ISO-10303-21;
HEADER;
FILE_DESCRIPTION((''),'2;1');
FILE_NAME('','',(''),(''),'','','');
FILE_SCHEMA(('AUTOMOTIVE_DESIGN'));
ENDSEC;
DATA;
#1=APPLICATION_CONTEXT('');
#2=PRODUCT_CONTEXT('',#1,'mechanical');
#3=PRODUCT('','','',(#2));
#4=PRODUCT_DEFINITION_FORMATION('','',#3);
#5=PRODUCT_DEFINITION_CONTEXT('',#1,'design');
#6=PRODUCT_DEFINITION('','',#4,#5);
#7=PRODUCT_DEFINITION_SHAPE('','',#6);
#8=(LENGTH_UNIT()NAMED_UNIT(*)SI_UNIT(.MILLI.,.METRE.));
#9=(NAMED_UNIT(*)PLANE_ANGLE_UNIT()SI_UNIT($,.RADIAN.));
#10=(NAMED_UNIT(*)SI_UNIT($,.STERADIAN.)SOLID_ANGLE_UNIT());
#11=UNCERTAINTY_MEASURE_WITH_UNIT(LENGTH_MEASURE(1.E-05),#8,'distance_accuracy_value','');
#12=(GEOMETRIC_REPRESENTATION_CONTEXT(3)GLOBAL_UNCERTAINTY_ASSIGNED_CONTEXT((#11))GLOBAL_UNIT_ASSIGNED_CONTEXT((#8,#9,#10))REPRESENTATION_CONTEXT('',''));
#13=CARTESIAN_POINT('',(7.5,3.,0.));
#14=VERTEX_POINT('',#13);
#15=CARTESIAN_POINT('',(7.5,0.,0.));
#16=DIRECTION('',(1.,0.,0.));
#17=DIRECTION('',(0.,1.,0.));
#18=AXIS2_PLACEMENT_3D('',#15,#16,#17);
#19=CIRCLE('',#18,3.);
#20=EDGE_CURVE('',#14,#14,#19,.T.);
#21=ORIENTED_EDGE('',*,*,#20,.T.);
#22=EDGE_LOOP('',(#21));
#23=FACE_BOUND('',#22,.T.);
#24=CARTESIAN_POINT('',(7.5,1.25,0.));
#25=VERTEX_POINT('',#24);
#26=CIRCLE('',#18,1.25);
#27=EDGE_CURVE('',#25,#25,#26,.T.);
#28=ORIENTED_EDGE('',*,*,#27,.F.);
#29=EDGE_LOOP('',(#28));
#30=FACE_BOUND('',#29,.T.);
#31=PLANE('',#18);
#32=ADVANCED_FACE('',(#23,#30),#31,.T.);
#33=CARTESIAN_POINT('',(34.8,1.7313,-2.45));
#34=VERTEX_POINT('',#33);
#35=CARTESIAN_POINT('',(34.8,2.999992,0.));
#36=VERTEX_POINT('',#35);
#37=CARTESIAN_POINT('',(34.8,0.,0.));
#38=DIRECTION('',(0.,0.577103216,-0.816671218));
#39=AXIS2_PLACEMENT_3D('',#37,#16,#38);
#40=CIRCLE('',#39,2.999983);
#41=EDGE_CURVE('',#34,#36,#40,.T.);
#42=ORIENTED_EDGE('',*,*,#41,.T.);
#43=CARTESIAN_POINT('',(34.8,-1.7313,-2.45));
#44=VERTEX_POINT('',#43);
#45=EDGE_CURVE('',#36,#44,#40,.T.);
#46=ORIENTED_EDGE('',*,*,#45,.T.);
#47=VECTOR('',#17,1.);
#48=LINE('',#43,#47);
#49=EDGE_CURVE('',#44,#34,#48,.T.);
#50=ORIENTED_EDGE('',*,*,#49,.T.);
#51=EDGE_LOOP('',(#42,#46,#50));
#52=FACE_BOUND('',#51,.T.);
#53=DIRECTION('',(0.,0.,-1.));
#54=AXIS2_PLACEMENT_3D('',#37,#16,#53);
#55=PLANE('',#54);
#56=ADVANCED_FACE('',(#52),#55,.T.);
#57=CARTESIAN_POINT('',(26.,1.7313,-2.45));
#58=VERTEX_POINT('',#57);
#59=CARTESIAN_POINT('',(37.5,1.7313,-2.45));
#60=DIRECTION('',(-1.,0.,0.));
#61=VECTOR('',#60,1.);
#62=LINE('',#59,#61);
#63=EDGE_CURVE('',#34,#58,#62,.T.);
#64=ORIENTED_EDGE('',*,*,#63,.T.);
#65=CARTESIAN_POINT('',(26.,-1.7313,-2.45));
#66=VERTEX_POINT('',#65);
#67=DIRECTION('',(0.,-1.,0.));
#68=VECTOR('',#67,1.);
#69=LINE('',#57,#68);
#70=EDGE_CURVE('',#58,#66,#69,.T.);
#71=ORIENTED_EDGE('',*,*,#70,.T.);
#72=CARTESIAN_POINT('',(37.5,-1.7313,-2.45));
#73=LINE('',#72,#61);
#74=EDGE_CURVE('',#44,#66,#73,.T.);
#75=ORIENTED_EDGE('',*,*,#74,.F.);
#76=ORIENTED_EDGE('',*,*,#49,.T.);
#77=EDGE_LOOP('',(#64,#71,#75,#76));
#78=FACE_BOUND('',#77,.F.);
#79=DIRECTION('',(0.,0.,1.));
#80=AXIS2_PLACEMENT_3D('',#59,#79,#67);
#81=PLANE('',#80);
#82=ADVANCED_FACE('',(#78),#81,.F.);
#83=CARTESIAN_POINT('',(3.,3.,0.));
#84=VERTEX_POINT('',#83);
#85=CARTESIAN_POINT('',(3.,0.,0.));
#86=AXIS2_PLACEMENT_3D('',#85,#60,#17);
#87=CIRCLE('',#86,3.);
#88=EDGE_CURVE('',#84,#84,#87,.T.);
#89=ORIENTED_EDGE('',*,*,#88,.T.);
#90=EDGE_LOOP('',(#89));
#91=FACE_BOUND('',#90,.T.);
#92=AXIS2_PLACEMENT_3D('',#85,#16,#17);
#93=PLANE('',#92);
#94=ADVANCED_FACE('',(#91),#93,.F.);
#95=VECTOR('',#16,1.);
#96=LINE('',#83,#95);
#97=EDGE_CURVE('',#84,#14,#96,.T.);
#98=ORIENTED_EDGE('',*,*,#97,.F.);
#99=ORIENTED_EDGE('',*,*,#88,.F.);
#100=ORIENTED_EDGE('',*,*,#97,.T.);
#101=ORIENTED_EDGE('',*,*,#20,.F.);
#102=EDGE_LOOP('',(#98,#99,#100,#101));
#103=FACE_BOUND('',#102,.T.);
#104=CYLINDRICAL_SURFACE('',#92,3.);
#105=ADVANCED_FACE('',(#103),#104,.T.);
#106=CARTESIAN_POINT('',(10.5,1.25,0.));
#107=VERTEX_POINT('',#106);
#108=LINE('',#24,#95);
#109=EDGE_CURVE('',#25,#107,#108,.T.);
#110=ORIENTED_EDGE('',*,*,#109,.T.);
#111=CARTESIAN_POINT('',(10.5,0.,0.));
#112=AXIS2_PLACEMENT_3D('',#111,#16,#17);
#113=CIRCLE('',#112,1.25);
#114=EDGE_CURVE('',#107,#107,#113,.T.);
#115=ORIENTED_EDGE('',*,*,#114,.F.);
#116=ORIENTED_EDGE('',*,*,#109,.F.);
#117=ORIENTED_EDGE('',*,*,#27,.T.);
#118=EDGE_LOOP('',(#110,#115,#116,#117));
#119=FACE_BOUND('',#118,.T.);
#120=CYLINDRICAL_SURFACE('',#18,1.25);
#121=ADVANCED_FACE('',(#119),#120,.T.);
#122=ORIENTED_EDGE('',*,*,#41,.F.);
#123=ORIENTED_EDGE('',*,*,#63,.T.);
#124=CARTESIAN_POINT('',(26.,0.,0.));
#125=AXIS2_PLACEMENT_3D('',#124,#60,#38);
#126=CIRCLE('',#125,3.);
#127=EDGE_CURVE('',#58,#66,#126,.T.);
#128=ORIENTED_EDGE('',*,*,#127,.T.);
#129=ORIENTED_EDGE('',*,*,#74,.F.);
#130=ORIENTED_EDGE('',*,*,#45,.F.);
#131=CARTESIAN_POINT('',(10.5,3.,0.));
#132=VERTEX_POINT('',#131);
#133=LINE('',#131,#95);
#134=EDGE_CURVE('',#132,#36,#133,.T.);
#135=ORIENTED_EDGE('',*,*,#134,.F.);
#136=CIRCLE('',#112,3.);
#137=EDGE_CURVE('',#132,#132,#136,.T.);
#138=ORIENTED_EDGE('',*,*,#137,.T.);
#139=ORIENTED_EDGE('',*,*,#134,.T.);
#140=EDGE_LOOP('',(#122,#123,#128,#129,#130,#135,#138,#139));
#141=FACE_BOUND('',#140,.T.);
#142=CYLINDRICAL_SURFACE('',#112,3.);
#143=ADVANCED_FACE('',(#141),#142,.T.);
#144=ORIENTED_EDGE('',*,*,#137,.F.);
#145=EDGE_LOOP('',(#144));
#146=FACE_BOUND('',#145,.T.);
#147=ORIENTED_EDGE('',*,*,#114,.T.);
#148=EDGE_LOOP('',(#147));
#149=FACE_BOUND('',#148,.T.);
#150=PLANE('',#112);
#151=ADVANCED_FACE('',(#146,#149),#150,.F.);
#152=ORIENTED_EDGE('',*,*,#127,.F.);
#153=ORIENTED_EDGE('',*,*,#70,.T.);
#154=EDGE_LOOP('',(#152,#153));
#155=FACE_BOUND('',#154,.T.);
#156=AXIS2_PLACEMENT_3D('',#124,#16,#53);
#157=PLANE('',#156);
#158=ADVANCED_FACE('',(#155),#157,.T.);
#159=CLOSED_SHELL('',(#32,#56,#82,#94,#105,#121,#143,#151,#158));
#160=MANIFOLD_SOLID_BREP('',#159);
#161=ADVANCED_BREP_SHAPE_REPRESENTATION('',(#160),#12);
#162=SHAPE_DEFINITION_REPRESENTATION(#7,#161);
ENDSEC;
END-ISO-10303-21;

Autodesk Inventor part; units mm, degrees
ref_plane "Start Plane" through (0, 0, 0) normal (1, 0, 0) x (0, 1, 0)
ref_plane "XZ Plane" through (0, 0, 0) normal (0, 1, 0) x (-1, 0, 0)
sketch "Main Sketch" plane through (0, 0, 0) normal (0, 0, 1) x (1, 0, 0)
  line L0 (0, 0) -> (37.5, 0)
  line L1 (0, 0) -> (0, 1.205)
  line L2 (0, 1.205) -> (3, 1.205)
  line L3 (3, 1.205) -> (3, 3)
  line L4 (7.5, 3) -> (7.5, 1.25)
  line L5 (3, 3) -> (7.5, 3)
  line L6 (7.5, 1.25) -> (10.5, 1.25)
  line L7 (10.5, 1.25) -> (10.5, 3)
  line L8 (37.5, 3) -> (37.5, 0)
  line L9 (10.5, 3) -> (37.5, 3)
  dimension "d3" = 2.41
  dimension "d4" = 6
  dimension "d5" = 2.5
  dimension "d6" = 6
revolve "Revolution1" add sketch "Main Sketch" angle 360 about axis through (0, 0, 0) along (1, 0, 0)
sketch "Sketch3" plane through (37.5, 0, 0) normal (1, 0, 0) x (0, 0, -1)
  circle A0 centre (0, 0) radius 3 projected
  circle A1 centre (0, 0) radius 3 projected
  line L0 (2.45, 1.7313) -> (2.45, -1.7313)
  dimension "d8" = 5.45
extrude "Extrusion1" cut sketch "Sketch3" against normal blind 11.5 contours A0 L0 picked at (2.5504, -0.3987)
ref_plane "Work Plane1" through (32.075, -15, -15) normal (1, 0, 0) x (0, 1, 0)
sketch "Sketch5" plane through (37.5, 0, 0) normal (1, 0, 0) x (0, 0, -1)
  line L0 (2.45, -1.7313) -> (2.45, 1.7313) projected
  arc A0 (2.45, 1.7313) -> (2.45, -1.7313) centre (0, 0) ccw projected
extrude "Extrusion3" cut sketch "Sketch5" against normal blind 2.7
sketch "Sketch6" plane through (0, 0, 0) normal (-1, 0, 0) x (0, 0, 1)
  circle A0 centre (0, 0) radius 1.205 projected
  circle A1 centre (0, 0) radius 1.205 projected
  circle A2 centre (0, 0) radius 3 projected
extrude "Extrusion4" cut sketch "Sketch6" against normal up to surface (3 mm away) contours A0 | A2
equation "\"Length\" = 37.5"
properties part number "Shaft" material "Steel"
